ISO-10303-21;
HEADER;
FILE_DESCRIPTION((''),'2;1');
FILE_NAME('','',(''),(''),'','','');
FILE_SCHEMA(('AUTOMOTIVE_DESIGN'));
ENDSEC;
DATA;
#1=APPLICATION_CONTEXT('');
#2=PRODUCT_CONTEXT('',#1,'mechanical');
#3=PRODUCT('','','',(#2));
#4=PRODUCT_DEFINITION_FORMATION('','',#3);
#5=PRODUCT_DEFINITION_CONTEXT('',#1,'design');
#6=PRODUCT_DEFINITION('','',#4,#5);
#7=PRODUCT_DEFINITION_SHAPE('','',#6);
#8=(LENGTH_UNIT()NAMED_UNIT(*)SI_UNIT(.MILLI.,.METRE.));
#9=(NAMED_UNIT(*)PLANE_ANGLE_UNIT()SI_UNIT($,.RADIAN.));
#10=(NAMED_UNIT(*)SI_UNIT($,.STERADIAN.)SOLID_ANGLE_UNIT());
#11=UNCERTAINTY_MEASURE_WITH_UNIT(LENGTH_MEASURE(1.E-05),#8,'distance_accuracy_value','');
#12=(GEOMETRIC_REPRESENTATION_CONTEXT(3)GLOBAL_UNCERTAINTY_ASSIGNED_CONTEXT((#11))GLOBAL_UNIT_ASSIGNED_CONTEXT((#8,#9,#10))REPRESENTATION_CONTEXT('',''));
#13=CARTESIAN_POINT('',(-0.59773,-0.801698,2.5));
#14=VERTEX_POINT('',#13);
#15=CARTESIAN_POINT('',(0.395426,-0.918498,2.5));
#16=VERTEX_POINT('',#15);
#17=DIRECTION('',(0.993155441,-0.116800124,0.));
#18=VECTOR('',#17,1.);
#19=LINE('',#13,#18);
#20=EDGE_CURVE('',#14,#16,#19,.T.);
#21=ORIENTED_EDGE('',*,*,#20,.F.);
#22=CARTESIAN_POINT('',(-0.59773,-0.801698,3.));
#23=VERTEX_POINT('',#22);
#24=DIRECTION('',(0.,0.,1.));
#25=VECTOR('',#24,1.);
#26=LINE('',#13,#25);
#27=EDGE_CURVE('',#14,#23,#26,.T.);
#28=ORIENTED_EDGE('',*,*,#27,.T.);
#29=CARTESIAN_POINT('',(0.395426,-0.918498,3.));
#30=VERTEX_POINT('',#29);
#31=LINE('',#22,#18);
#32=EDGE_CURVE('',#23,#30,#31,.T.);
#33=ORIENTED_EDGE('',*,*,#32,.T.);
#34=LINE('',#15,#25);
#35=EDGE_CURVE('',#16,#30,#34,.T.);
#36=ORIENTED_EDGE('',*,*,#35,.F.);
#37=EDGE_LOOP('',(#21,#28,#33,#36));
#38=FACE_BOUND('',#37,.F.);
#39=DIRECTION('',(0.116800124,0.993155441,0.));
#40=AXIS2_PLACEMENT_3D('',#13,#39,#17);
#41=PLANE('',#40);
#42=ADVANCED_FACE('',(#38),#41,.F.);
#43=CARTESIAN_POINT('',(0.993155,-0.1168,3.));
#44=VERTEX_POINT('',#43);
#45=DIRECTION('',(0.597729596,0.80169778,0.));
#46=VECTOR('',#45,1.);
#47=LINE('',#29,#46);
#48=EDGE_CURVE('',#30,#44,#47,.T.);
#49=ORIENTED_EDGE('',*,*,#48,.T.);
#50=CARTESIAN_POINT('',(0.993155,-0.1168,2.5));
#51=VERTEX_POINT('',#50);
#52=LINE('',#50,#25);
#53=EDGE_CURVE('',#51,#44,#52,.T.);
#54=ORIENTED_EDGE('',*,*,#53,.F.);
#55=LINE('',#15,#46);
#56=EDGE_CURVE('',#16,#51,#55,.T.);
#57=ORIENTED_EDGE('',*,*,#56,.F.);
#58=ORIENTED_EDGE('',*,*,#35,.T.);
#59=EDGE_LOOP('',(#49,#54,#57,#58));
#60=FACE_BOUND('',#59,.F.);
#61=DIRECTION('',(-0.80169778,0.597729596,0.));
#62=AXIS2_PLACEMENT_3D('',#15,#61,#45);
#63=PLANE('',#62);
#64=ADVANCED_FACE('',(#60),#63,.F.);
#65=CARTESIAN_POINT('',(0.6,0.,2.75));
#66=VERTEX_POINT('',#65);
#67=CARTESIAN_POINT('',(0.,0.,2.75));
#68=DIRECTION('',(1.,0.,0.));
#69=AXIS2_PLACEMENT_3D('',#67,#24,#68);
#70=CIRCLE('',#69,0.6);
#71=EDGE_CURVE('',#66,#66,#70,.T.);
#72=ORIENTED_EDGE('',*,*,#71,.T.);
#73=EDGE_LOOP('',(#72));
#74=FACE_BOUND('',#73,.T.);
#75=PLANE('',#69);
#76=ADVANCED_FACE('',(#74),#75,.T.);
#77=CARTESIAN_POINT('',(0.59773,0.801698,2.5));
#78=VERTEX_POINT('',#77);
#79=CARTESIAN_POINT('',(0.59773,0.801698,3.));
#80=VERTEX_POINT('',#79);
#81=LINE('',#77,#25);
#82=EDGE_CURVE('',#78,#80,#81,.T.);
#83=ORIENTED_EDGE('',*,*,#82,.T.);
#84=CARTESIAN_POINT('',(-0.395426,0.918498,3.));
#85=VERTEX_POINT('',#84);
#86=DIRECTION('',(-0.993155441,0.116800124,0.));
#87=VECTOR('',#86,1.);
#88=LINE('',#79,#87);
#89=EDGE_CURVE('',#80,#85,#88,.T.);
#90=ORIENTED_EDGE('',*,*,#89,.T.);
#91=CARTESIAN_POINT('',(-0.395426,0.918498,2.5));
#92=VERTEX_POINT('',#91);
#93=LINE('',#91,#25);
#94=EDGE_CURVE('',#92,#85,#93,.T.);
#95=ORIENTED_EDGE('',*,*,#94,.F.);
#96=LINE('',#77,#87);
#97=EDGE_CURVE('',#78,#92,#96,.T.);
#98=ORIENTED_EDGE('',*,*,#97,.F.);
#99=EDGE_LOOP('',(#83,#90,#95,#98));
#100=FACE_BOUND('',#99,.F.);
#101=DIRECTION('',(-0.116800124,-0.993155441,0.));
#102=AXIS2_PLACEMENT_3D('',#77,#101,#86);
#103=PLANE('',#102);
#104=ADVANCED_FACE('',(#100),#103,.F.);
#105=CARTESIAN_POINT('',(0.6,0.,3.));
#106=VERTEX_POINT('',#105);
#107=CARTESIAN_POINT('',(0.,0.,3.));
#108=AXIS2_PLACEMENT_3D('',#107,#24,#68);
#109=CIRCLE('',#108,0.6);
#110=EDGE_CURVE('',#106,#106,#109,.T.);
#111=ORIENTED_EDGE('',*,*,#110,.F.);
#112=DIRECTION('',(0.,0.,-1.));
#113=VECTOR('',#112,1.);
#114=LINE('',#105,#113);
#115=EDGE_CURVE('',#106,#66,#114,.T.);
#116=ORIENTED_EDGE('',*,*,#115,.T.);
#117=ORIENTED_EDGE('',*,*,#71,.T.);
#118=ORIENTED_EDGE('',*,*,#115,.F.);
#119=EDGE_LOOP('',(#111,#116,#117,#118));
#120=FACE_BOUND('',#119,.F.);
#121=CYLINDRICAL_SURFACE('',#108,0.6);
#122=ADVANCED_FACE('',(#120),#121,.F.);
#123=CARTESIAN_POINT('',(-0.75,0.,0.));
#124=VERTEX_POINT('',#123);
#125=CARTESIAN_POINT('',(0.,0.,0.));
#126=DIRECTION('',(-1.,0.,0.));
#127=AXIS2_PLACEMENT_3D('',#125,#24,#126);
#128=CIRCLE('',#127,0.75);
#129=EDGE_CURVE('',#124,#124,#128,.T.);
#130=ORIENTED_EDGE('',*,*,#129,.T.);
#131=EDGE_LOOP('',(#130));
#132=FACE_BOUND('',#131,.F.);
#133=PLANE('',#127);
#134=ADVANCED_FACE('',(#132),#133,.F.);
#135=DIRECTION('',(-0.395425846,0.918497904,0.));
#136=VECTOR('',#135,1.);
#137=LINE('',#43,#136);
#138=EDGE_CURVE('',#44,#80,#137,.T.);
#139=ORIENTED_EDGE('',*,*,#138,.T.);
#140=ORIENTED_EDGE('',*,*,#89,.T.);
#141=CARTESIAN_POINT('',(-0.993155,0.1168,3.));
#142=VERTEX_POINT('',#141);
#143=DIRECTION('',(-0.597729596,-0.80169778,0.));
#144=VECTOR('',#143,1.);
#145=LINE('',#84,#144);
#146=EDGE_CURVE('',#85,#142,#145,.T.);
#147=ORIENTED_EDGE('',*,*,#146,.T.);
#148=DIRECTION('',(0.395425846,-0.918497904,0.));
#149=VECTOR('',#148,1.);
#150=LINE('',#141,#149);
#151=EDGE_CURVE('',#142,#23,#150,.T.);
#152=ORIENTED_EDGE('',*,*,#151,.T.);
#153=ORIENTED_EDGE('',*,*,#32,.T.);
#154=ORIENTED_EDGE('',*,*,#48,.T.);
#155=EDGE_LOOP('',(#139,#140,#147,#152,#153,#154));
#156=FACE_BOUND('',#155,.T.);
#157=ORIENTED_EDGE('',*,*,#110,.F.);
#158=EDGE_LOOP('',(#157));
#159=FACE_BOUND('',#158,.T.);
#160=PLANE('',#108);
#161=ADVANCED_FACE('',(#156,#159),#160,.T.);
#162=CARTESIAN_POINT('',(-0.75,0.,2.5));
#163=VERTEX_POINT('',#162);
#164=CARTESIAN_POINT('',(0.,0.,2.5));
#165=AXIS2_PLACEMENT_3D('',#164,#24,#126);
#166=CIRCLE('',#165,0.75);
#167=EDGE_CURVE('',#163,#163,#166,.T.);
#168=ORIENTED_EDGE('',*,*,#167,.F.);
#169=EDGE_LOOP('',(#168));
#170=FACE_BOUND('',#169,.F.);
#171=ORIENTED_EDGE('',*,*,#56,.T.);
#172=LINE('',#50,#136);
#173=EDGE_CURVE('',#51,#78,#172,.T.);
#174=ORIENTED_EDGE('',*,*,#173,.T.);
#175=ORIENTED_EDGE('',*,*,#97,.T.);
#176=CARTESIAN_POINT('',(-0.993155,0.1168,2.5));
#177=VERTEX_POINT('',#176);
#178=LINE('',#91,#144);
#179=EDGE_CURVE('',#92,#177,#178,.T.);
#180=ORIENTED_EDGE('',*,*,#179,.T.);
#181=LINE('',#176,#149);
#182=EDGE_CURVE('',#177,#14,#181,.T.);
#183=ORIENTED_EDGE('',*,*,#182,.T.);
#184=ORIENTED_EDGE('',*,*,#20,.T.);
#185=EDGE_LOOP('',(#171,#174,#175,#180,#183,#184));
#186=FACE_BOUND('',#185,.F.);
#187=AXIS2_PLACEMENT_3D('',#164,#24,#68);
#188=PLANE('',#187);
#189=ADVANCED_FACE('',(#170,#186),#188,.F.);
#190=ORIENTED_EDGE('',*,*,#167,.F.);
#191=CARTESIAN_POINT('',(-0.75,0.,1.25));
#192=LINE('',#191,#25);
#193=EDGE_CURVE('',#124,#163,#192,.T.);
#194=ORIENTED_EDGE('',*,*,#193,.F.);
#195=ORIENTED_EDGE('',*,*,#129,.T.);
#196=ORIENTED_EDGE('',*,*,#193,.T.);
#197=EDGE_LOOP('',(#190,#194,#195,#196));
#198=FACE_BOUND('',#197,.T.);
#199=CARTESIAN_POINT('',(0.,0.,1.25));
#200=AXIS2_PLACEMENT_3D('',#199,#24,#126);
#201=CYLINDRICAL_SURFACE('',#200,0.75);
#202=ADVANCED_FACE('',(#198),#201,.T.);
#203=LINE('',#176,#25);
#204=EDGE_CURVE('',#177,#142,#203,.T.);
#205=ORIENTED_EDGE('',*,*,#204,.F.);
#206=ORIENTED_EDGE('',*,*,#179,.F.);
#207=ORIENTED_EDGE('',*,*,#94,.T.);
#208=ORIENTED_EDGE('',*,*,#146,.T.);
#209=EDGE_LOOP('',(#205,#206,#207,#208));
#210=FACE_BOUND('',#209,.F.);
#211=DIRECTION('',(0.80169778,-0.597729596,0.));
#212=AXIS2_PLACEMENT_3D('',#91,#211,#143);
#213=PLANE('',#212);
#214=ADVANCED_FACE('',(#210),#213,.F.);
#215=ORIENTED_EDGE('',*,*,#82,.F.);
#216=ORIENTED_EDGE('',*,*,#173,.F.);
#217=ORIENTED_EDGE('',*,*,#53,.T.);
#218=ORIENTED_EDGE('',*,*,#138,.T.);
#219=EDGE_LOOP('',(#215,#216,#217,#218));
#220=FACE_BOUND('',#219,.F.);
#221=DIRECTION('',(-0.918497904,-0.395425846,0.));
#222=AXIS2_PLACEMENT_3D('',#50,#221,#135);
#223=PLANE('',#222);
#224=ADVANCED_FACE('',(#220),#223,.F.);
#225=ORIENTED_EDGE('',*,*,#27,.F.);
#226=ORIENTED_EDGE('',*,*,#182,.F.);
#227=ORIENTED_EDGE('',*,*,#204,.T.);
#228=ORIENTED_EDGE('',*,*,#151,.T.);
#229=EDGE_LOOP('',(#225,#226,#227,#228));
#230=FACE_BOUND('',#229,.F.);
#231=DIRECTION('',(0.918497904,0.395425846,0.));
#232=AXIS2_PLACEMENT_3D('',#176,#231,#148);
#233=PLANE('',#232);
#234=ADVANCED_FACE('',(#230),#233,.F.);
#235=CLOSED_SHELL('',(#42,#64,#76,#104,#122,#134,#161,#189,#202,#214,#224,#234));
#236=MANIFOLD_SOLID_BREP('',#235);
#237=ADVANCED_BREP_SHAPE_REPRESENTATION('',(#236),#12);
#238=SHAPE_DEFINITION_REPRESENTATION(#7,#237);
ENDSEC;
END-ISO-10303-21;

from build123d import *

# Parameters (mm, degrees)
F0_W     = 0.75
F0_H     = 2.5
F2_R     = 0.75
F3_DEPTH = 0.5
F4_R     = 0.6
F5_DEPTH = 0.25


with BuildPart() as f1:
    # F0 (on Front) → F1 (revolve)
    with BuildSketch(Plane.XZ):
        with Locations((-0.375, 1.25)):
            Rectangle(F0_W, F0_H)
    revolve(axis=Axis((0, 0, 1.25), (0, 0, 1)))

    # F2 (on face) → F3 (join)
    with BuildSketch(Plane.XY.offset(2.5)):
        Polygon((0.5977295956, 0.80169778), (-0.3954258459, 0.9184979044), (-0.9931554415, 0.1168001244), (-0.5977295956, -0.80169778), (0.3954258459, -0.9184979044), (0.9931554415, -0.1168001244), align=None)
        Circle(F2_R, mode=Mode.SUBTRACT)
        Circle(F2_R)
    extrude(amount=F3_DEPTH)

    # F4 (on face) → F5 (cut)
    with BuildSketch(Plane.XY.offset(3)):
        Circle(F4_R)
    extrude(amount=-F5_DEPTH, mode=Mode.SUBTRACT)


solid = f1.part
